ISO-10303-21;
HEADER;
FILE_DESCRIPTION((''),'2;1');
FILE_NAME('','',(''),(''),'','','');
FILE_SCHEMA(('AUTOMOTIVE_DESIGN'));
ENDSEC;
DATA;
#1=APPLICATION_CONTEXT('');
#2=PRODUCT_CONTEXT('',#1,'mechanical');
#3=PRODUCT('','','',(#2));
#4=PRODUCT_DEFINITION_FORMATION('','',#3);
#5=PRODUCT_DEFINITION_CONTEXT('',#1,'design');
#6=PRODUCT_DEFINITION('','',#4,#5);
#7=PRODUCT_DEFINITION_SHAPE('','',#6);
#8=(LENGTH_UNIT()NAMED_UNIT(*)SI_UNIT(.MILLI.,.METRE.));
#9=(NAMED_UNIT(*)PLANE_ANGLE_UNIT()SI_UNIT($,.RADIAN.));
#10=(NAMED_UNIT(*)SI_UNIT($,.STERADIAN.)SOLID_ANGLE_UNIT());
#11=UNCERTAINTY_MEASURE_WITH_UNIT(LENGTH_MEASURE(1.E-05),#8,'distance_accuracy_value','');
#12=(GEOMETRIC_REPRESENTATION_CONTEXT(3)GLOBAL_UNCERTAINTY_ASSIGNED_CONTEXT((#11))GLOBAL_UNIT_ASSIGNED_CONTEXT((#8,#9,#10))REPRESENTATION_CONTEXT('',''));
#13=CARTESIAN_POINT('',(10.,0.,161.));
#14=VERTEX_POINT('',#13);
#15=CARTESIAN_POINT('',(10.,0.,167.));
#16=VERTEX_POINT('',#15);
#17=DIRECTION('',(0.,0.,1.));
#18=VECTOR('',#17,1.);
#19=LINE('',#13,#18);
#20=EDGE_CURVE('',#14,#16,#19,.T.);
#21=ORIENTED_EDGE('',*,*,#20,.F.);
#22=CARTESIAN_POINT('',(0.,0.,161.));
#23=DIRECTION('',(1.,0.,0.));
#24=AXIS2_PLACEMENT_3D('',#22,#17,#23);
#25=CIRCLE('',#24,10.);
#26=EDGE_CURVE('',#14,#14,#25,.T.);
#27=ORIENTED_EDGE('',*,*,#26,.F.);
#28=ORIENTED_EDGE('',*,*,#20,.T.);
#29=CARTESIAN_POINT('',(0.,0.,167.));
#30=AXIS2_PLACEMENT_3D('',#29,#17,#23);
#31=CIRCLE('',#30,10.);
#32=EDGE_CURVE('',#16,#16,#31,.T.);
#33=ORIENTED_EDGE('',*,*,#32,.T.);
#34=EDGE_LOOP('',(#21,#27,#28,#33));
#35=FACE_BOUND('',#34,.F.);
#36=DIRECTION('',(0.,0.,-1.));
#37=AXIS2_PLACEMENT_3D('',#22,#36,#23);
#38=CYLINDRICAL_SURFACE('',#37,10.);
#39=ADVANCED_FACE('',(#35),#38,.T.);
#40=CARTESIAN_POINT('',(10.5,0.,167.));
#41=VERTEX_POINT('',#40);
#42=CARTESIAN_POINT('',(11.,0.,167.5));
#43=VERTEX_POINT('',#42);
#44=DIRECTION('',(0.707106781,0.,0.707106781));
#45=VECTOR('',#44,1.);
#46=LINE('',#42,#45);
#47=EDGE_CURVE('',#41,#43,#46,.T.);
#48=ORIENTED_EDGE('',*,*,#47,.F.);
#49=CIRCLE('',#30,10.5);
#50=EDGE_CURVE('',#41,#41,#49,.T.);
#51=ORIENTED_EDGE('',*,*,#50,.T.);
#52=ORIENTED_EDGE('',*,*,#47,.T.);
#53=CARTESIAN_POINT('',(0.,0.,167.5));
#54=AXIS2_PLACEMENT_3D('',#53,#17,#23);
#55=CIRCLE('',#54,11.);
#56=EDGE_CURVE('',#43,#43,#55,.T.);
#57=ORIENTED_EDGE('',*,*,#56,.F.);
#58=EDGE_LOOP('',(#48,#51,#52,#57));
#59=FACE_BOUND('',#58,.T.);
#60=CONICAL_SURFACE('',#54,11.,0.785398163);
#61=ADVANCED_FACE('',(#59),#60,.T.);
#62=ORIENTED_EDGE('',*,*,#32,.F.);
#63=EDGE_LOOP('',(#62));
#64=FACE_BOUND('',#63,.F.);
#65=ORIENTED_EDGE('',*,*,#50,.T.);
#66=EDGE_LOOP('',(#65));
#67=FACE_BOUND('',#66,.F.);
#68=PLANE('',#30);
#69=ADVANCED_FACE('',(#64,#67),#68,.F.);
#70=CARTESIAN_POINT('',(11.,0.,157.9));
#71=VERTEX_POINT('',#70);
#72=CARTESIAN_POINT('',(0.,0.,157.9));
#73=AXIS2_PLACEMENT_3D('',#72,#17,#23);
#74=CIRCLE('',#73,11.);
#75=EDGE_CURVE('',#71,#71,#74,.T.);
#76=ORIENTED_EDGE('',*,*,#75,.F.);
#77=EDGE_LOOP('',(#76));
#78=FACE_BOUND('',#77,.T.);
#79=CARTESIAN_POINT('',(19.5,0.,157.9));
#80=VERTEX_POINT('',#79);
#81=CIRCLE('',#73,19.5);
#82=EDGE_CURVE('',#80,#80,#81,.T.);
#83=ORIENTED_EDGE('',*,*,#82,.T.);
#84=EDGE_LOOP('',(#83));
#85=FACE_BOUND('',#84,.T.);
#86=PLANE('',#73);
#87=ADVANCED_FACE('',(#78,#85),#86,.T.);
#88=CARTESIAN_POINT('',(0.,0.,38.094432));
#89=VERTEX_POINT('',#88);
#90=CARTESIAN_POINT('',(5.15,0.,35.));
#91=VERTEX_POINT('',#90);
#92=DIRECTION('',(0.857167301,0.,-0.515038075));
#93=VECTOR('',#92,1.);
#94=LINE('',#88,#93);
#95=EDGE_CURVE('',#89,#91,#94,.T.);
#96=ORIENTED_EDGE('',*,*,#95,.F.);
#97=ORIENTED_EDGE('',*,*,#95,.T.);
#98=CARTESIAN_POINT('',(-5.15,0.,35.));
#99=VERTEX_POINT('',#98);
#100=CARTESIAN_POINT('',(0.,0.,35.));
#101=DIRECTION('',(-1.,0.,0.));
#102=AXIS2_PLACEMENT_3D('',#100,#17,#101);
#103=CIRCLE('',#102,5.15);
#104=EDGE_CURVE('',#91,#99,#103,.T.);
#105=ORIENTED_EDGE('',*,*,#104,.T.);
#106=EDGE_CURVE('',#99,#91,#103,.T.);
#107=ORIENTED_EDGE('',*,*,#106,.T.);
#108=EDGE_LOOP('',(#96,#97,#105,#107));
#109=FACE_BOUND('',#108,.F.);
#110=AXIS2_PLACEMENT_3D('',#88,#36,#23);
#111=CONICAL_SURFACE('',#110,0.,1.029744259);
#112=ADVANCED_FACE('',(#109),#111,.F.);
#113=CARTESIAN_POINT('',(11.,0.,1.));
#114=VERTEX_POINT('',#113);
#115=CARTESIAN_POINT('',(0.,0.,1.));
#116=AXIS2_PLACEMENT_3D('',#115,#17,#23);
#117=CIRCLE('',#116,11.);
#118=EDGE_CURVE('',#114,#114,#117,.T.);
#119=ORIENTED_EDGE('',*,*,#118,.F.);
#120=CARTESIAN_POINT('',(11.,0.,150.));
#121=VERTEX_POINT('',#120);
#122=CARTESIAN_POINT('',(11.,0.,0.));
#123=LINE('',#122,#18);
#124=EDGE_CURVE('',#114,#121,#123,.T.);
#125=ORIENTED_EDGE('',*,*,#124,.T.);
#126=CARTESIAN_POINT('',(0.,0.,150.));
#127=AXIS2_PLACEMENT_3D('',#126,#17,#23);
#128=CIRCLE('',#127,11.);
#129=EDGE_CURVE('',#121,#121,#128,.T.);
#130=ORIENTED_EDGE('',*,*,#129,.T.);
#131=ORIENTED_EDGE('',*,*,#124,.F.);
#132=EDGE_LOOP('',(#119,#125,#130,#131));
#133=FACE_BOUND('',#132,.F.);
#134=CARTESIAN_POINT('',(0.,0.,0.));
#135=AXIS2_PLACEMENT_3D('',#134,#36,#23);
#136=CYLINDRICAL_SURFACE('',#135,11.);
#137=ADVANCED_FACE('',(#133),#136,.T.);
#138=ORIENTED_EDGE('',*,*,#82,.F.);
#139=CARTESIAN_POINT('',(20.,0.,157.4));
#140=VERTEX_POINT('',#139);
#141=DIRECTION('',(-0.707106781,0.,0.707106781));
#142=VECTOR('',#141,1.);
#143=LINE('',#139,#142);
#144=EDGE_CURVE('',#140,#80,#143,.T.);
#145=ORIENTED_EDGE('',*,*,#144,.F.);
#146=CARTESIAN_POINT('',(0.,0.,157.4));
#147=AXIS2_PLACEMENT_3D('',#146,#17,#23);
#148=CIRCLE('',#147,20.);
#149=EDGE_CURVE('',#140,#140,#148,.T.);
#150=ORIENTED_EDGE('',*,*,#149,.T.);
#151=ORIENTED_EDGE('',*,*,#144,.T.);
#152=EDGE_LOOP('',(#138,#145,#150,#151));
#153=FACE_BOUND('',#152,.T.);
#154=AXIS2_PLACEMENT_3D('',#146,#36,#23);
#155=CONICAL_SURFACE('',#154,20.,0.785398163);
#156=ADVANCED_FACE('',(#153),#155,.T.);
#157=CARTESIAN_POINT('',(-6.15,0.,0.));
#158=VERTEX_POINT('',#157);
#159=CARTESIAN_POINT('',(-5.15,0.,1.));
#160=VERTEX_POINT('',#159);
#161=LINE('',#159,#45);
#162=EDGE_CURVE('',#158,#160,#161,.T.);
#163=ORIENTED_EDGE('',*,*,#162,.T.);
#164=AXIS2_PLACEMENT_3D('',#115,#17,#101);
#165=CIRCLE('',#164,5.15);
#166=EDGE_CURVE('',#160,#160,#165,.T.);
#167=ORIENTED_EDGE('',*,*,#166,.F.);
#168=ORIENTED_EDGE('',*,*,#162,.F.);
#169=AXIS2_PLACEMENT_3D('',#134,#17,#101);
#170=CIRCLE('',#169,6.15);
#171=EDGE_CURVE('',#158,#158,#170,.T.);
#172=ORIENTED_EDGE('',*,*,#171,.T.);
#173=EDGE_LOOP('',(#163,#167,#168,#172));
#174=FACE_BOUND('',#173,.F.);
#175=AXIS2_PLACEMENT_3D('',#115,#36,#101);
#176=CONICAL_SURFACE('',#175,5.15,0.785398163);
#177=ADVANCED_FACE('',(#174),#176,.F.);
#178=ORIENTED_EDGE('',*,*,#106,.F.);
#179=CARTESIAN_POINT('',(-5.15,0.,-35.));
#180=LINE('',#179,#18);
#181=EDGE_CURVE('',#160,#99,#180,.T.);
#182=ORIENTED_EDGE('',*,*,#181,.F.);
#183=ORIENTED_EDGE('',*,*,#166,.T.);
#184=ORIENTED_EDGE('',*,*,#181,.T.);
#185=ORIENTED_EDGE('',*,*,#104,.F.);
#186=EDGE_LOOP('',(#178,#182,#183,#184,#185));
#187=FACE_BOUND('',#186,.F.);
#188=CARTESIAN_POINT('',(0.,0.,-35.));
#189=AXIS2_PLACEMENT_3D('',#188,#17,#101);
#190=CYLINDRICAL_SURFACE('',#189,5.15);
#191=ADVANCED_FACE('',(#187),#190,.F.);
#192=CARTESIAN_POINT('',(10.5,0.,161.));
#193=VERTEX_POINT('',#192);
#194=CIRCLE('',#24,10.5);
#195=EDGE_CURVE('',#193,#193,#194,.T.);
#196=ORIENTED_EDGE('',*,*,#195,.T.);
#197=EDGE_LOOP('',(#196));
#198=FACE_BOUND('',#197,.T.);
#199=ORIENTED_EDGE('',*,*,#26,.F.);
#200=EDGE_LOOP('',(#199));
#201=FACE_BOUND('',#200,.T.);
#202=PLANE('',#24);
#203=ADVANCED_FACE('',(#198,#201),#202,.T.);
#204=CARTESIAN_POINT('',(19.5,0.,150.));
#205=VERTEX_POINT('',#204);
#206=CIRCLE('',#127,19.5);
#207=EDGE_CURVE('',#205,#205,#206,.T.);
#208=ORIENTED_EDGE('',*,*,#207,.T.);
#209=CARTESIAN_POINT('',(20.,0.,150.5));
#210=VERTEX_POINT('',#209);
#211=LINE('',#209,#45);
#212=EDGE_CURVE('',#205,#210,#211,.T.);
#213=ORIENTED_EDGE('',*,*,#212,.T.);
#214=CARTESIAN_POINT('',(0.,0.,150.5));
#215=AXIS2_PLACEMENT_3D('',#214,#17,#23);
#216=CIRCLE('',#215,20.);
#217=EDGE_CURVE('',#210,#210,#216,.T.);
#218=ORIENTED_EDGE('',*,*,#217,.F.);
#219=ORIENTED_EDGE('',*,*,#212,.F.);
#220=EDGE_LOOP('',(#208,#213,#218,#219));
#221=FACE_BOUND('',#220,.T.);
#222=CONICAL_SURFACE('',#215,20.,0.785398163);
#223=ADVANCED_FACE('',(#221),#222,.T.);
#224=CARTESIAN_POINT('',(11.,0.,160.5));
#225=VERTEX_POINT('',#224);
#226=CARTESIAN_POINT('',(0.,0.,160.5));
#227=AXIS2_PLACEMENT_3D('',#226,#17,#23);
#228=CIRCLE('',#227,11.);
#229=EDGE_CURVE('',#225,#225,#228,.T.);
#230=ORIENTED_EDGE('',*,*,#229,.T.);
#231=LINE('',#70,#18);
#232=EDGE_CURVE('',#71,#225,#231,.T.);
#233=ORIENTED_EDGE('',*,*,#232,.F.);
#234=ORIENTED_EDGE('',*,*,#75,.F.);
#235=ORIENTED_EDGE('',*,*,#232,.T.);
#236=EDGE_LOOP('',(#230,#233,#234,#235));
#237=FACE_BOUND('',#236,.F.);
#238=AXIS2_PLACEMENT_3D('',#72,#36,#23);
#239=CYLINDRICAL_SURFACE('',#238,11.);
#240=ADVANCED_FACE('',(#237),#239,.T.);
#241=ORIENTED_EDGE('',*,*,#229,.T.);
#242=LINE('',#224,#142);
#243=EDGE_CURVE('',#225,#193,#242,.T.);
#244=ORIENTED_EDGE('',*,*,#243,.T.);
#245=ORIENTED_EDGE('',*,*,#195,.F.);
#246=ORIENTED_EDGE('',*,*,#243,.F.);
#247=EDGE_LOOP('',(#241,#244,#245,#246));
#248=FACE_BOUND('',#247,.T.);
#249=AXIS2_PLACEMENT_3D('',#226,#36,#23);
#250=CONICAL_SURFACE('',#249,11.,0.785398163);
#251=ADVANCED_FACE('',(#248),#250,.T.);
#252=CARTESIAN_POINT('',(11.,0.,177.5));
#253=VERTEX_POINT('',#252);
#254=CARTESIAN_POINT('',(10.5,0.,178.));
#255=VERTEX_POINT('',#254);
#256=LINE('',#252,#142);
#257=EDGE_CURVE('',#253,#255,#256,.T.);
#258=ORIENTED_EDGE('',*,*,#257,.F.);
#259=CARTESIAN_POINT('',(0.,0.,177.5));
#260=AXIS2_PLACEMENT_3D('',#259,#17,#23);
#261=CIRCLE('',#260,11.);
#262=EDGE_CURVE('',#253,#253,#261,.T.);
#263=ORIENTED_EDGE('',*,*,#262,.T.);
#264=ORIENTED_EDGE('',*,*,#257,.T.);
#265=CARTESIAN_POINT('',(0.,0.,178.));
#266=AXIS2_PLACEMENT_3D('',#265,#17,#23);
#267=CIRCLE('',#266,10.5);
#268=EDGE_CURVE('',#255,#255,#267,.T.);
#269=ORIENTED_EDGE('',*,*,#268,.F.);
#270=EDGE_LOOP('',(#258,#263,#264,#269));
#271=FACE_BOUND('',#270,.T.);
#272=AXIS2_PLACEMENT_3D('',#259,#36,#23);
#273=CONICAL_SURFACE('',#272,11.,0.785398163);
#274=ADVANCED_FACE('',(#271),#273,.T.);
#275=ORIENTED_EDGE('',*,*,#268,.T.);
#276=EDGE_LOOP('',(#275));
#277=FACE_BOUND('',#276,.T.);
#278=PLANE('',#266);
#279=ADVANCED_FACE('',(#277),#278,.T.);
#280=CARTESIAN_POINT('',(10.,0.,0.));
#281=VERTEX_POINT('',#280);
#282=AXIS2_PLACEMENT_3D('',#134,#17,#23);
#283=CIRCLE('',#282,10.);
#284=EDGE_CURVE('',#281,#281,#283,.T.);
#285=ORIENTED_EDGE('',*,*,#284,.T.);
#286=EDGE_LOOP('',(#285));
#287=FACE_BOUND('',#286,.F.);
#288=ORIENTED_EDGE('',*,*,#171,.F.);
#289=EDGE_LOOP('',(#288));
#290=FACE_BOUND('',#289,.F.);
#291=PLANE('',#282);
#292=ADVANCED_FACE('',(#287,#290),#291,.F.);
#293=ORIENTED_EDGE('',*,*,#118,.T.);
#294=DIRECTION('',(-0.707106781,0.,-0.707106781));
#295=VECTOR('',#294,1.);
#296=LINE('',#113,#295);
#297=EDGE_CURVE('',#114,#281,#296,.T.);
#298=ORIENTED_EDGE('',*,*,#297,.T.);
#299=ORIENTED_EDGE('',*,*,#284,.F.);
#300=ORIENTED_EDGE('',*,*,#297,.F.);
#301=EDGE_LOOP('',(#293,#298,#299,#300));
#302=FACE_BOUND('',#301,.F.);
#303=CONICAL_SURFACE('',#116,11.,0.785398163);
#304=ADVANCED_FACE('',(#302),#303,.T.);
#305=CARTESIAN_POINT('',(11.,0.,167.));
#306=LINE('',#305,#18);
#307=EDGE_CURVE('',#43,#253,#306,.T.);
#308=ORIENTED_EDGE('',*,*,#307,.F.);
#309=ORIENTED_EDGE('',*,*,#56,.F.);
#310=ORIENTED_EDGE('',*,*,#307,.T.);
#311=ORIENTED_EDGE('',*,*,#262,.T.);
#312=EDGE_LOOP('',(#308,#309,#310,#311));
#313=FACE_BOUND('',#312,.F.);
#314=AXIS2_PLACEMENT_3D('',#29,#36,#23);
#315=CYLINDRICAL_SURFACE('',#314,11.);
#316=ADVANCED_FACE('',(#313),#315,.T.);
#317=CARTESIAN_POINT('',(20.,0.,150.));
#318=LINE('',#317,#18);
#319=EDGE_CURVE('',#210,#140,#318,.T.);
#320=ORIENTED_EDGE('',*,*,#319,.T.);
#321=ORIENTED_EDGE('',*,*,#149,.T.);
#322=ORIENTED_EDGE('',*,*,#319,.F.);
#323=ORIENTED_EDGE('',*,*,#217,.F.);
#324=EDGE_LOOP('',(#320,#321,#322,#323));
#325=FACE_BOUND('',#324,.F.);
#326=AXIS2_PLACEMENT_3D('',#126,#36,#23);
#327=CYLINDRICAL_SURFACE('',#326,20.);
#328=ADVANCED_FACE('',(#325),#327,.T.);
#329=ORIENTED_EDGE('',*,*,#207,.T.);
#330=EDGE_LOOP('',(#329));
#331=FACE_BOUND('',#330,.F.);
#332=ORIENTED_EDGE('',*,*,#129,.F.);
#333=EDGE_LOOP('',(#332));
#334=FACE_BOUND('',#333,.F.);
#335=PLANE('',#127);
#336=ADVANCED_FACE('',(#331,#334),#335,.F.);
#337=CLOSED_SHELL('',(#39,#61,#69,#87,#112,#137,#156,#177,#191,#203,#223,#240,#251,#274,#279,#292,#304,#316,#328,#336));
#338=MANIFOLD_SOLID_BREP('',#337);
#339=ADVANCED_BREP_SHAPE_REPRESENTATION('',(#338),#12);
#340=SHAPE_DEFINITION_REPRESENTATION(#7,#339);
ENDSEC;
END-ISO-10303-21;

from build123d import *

# Parameters (mm, degrees)
F0_R      = 11
F1_DEPTH  = 150
F2_R      = 20
F3_DEPTH  = 7.9
F4_R      = 11
F5_DEPTH  = 3.1
F6_R      = 10
F7_DEPTH  = 6
F8_R      = 11
F9_DEPTH  = 11
F11_D     = 10.3
F11_DEPTH = 35
F11_TIP   = 3.094432188
F12_SIZE  = 1
F13_SIZE  = 0.5


with BuildPart() as f1:
    # F0 (on Top) → F1 (new body)
    with BuildSketch(Plane.XY):
        Circle(F0_R)
    extrude(amount=F1_DEPTH)

    # F2 (on face) → F3 (join)
    with BuildSketch(Plane.XY.offset(150)):
        Circle(F2_R)
    extrude(amount=F3_DEPTH)

    # F4 (on face) → F5 (join)
    with BuildSketch(Plane.XY.offset(157.9)):
        Circle(F4_R)
    extrude(amount=F5_DEPTH)

    # F6 (on face) → F7 (join)
    with BuildSketch(Plane.XY.offset(161)):
        Circle(F6_R)
    extrude(amount=F7_DEPTH)

    # F8 (on face) → F9 (join)
    with BuildSketch(Plane.XY.offset(167)):
        Circle(F8_R)
    extrude(amount=F9_DEPTH)

    # F11
    with Locations(Plane(origin=(0, 0, 0), x_dir=(1, 0, 0), z_dir=(0, 0, -1))):
        with Locations((0, 0)):
            Hole(F11_D / 2, depth=F11_DEPTH)
            with Locations((0, 0, -(F11_DEPTH + F11_TIP / 2))):  # 118° drill point
                Cone(0, F11_D / 2, F11_TIP, mode=Mode.SUBTRACT)

    # F12
    f12_edges = [f1.edges().sort_by_distance(p)[0] for p in [
        (-11, 0, 0),
        (-5.15, 0, 0),
    ]]
    chamfer(f12_edges, length=F12_SIZE)

    # F13
    f13_edges = [f1.edges().sort_by_distance(p)[0] for p in [
        (-20, 0, 150),
        (-20, 0, 157.9),
        (-11, 0, 161),
        (-11, 0, 167),
        (-11, 0, 178),
    ]]
    chamfer(f13_edges, length=F13_SIZE)


solid = f1.part
